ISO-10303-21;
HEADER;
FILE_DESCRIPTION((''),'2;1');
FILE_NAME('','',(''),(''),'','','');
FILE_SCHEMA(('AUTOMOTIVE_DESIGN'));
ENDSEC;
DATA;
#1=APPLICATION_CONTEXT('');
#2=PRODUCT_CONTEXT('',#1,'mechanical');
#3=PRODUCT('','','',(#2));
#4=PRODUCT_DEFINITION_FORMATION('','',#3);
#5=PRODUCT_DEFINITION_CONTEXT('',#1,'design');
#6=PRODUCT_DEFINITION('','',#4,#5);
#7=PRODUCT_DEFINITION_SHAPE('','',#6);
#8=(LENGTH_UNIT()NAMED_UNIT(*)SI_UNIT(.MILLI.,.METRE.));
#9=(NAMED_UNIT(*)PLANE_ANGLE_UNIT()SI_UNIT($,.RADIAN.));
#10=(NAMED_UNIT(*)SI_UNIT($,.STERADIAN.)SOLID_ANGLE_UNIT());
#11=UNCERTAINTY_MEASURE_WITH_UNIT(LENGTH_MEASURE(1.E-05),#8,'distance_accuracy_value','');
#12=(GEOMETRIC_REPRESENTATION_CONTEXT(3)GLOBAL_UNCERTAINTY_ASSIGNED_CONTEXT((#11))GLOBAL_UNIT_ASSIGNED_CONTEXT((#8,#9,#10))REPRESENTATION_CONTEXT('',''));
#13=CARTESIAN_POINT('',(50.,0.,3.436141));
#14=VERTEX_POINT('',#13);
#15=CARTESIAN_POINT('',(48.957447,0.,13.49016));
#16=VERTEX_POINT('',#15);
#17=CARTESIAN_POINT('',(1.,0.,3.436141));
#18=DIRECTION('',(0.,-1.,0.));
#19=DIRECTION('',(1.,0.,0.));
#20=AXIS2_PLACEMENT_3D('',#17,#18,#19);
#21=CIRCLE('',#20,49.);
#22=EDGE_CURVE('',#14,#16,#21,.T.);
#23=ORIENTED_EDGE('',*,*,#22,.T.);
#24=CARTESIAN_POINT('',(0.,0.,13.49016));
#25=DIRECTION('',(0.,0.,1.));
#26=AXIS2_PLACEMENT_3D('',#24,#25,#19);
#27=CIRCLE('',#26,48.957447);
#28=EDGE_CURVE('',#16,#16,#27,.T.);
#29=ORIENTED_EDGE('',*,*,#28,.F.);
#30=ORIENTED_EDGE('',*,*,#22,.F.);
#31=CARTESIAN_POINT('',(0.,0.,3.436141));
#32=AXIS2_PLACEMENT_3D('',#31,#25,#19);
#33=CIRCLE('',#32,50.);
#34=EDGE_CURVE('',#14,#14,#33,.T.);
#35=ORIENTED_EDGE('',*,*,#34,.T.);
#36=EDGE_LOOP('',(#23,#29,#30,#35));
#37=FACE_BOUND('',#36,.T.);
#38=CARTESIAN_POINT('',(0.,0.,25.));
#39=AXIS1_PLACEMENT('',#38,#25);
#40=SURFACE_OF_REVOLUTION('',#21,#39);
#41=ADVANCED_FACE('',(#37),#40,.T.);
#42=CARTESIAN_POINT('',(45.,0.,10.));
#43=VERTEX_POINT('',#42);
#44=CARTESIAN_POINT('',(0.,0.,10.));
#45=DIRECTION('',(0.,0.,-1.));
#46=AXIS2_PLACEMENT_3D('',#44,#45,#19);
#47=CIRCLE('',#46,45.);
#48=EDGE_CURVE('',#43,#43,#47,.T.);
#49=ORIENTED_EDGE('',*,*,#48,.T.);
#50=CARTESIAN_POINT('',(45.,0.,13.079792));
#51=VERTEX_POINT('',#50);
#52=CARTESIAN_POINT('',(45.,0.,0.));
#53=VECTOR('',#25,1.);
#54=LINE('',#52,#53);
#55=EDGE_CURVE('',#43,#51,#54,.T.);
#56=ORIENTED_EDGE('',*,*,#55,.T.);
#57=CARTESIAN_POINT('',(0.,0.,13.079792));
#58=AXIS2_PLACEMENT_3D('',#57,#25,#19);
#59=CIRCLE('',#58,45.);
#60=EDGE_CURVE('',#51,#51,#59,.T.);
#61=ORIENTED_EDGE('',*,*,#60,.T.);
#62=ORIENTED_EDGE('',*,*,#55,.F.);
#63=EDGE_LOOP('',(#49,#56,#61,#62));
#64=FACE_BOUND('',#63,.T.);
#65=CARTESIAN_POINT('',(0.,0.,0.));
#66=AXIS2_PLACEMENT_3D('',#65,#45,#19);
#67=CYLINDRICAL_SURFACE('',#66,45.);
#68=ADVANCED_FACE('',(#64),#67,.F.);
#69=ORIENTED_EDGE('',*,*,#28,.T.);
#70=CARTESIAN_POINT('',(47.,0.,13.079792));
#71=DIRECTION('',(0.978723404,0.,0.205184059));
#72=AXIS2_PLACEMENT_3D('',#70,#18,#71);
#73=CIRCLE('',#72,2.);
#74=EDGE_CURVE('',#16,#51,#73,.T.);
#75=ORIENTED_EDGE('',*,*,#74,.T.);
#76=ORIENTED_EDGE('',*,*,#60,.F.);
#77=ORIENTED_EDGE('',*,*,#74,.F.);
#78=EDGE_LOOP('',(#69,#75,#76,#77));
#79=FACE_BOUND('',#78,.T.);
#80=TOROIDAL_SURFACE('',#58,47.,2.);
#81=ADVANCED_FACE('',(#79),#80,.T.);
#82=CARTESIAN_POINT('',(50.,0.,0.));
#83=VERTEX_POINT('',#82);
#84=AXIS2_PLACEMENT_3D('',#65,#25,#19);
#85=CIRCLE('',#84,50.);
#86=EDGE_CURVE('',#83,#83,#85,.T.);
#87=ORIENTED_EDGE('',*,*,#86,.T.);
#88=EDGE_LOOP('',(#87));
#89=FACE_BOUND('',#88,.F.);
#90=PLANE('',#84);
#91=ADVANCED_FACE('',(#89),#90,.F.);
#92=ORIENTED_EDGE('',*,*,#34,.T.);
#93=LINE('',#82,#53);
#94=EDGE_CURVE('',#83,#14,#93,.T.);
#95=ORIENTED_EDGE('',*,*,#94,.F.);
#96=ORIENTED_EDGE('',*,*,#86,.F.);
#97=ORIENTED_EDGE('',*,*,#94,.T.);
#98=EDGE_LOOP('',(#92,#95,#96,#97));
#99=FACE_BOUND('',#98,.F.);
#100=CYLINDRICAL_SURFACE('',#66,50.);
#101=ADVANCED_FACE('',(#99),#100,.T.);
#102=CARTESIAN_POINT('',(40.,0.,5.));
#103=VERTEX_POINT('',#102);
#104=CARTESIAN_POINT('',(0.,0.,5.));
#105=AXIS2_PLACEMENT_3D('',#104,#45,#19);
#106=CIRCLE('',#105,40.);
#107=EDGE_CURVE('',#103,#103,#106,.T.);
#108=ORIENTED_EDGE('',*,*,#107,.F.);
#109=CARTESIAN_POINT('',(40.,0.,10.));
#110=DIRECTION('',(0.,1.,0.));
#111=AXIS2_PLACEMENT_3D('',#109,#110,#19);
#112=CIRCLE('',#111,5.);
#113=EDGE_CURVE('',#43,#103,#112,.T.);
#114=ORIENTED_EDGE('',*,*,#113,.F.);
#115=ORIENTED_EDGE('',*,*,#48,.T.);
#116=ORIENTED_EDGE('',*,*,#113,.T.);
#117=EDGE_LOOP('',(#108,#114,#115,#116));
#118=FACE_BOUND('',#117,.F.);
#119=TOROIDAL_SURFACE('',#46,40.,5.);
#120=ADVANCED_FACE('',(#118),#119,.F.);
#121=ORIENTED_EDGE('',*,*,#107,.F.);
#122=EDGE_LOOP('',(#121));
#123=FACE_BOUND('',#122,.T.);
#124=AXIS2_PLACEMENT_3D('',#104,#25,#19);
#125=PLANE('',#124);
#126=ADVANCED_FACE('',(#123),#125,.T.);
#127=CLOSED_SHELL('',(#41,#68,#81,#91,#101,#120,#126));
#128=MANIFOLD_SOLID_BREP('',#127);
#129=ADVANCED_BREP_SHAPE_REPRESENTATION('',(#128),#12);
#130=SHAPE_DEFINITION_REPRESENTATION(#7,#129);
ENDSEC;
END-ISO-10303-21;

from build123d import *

# Parameters (mm, degrees)
F0_R     = 50
F1_DEPTH = 25
F2_T     = -5
F5_R     = 5


# Not quite as in the source:
# - a fillet or chamfer that OpenCascade refuses, or shapes differently, is made with other operations: its cross-section is extruded or revolved along the edge and cut away or added


with BuildPart() as f1:
    # F0 (on Top) → F1 (new body)
    with BuildSketch(Plane.XY):
        Circle(F0_R)
    extrude(amount=F1_DEPTH)

    # F2
    f2_openings = [f1.faces().sort_by_distance(p)[0] for p in [
        (0, 0, 25),
    ]]
    offset(amount=F2_T, openings=f2_openings)

    # F3: fillet of radius 49 on 1 edges, made by hand

    # F3_s1 → F3_t2 (revolve, cut)
    with BuildSketch(Plane.XZ):
        with BuildLine():
            ThreePointArc((50, 3.4361413472), (48.7336359395, 14.5041131577), (45, 25))
            Line((45, 25), (45.88, 25.4312771731))
            ThreePointArc((45.88, 25.4312771731), (47.5, 25.98), (50, 25.98))
            Line((50, 25.98), (50.98, 25))
            Line((50.98, 25), (50.98, 3.4361413472))
            Line((50.98, 3.4361413472), (50, 3.4361413472))
        make_face()
    revolve(axis=Axis((0, 0, 25), (0, 0, 1)), mode=Mode.SUBTRACT)

    # F4: fillet of radius 2 on 1 edges, made by hand

    # F4_s1 → F4_t2 (revolve, cut)
    with BuildSketch(Plane.XZ):
        with BuildLine():
            ThreePointArc((48.9574468085, 13.4901602258), (46.7937157507, 15.0691253656), (45, 13.0797921083))
            Line((45, 13.0797921083), (45, 25))
            ThreePointArc((45, 25), (47.3374806047, 19.3684321809), (48.9574468085, 13.4901602258))
        make_face()
    revolve(axis=Axis((0, 0, 25), (0, 0, 1)), mode=Mode.SUBTRACT)

    # F5
    f5_edges = [f1.edges().sort_by_distance(p)[0] for p in [
        (-45, 0, 5),
    ]]
    fillet(f5_edges, radius=F5_R)


solid = f1.part
